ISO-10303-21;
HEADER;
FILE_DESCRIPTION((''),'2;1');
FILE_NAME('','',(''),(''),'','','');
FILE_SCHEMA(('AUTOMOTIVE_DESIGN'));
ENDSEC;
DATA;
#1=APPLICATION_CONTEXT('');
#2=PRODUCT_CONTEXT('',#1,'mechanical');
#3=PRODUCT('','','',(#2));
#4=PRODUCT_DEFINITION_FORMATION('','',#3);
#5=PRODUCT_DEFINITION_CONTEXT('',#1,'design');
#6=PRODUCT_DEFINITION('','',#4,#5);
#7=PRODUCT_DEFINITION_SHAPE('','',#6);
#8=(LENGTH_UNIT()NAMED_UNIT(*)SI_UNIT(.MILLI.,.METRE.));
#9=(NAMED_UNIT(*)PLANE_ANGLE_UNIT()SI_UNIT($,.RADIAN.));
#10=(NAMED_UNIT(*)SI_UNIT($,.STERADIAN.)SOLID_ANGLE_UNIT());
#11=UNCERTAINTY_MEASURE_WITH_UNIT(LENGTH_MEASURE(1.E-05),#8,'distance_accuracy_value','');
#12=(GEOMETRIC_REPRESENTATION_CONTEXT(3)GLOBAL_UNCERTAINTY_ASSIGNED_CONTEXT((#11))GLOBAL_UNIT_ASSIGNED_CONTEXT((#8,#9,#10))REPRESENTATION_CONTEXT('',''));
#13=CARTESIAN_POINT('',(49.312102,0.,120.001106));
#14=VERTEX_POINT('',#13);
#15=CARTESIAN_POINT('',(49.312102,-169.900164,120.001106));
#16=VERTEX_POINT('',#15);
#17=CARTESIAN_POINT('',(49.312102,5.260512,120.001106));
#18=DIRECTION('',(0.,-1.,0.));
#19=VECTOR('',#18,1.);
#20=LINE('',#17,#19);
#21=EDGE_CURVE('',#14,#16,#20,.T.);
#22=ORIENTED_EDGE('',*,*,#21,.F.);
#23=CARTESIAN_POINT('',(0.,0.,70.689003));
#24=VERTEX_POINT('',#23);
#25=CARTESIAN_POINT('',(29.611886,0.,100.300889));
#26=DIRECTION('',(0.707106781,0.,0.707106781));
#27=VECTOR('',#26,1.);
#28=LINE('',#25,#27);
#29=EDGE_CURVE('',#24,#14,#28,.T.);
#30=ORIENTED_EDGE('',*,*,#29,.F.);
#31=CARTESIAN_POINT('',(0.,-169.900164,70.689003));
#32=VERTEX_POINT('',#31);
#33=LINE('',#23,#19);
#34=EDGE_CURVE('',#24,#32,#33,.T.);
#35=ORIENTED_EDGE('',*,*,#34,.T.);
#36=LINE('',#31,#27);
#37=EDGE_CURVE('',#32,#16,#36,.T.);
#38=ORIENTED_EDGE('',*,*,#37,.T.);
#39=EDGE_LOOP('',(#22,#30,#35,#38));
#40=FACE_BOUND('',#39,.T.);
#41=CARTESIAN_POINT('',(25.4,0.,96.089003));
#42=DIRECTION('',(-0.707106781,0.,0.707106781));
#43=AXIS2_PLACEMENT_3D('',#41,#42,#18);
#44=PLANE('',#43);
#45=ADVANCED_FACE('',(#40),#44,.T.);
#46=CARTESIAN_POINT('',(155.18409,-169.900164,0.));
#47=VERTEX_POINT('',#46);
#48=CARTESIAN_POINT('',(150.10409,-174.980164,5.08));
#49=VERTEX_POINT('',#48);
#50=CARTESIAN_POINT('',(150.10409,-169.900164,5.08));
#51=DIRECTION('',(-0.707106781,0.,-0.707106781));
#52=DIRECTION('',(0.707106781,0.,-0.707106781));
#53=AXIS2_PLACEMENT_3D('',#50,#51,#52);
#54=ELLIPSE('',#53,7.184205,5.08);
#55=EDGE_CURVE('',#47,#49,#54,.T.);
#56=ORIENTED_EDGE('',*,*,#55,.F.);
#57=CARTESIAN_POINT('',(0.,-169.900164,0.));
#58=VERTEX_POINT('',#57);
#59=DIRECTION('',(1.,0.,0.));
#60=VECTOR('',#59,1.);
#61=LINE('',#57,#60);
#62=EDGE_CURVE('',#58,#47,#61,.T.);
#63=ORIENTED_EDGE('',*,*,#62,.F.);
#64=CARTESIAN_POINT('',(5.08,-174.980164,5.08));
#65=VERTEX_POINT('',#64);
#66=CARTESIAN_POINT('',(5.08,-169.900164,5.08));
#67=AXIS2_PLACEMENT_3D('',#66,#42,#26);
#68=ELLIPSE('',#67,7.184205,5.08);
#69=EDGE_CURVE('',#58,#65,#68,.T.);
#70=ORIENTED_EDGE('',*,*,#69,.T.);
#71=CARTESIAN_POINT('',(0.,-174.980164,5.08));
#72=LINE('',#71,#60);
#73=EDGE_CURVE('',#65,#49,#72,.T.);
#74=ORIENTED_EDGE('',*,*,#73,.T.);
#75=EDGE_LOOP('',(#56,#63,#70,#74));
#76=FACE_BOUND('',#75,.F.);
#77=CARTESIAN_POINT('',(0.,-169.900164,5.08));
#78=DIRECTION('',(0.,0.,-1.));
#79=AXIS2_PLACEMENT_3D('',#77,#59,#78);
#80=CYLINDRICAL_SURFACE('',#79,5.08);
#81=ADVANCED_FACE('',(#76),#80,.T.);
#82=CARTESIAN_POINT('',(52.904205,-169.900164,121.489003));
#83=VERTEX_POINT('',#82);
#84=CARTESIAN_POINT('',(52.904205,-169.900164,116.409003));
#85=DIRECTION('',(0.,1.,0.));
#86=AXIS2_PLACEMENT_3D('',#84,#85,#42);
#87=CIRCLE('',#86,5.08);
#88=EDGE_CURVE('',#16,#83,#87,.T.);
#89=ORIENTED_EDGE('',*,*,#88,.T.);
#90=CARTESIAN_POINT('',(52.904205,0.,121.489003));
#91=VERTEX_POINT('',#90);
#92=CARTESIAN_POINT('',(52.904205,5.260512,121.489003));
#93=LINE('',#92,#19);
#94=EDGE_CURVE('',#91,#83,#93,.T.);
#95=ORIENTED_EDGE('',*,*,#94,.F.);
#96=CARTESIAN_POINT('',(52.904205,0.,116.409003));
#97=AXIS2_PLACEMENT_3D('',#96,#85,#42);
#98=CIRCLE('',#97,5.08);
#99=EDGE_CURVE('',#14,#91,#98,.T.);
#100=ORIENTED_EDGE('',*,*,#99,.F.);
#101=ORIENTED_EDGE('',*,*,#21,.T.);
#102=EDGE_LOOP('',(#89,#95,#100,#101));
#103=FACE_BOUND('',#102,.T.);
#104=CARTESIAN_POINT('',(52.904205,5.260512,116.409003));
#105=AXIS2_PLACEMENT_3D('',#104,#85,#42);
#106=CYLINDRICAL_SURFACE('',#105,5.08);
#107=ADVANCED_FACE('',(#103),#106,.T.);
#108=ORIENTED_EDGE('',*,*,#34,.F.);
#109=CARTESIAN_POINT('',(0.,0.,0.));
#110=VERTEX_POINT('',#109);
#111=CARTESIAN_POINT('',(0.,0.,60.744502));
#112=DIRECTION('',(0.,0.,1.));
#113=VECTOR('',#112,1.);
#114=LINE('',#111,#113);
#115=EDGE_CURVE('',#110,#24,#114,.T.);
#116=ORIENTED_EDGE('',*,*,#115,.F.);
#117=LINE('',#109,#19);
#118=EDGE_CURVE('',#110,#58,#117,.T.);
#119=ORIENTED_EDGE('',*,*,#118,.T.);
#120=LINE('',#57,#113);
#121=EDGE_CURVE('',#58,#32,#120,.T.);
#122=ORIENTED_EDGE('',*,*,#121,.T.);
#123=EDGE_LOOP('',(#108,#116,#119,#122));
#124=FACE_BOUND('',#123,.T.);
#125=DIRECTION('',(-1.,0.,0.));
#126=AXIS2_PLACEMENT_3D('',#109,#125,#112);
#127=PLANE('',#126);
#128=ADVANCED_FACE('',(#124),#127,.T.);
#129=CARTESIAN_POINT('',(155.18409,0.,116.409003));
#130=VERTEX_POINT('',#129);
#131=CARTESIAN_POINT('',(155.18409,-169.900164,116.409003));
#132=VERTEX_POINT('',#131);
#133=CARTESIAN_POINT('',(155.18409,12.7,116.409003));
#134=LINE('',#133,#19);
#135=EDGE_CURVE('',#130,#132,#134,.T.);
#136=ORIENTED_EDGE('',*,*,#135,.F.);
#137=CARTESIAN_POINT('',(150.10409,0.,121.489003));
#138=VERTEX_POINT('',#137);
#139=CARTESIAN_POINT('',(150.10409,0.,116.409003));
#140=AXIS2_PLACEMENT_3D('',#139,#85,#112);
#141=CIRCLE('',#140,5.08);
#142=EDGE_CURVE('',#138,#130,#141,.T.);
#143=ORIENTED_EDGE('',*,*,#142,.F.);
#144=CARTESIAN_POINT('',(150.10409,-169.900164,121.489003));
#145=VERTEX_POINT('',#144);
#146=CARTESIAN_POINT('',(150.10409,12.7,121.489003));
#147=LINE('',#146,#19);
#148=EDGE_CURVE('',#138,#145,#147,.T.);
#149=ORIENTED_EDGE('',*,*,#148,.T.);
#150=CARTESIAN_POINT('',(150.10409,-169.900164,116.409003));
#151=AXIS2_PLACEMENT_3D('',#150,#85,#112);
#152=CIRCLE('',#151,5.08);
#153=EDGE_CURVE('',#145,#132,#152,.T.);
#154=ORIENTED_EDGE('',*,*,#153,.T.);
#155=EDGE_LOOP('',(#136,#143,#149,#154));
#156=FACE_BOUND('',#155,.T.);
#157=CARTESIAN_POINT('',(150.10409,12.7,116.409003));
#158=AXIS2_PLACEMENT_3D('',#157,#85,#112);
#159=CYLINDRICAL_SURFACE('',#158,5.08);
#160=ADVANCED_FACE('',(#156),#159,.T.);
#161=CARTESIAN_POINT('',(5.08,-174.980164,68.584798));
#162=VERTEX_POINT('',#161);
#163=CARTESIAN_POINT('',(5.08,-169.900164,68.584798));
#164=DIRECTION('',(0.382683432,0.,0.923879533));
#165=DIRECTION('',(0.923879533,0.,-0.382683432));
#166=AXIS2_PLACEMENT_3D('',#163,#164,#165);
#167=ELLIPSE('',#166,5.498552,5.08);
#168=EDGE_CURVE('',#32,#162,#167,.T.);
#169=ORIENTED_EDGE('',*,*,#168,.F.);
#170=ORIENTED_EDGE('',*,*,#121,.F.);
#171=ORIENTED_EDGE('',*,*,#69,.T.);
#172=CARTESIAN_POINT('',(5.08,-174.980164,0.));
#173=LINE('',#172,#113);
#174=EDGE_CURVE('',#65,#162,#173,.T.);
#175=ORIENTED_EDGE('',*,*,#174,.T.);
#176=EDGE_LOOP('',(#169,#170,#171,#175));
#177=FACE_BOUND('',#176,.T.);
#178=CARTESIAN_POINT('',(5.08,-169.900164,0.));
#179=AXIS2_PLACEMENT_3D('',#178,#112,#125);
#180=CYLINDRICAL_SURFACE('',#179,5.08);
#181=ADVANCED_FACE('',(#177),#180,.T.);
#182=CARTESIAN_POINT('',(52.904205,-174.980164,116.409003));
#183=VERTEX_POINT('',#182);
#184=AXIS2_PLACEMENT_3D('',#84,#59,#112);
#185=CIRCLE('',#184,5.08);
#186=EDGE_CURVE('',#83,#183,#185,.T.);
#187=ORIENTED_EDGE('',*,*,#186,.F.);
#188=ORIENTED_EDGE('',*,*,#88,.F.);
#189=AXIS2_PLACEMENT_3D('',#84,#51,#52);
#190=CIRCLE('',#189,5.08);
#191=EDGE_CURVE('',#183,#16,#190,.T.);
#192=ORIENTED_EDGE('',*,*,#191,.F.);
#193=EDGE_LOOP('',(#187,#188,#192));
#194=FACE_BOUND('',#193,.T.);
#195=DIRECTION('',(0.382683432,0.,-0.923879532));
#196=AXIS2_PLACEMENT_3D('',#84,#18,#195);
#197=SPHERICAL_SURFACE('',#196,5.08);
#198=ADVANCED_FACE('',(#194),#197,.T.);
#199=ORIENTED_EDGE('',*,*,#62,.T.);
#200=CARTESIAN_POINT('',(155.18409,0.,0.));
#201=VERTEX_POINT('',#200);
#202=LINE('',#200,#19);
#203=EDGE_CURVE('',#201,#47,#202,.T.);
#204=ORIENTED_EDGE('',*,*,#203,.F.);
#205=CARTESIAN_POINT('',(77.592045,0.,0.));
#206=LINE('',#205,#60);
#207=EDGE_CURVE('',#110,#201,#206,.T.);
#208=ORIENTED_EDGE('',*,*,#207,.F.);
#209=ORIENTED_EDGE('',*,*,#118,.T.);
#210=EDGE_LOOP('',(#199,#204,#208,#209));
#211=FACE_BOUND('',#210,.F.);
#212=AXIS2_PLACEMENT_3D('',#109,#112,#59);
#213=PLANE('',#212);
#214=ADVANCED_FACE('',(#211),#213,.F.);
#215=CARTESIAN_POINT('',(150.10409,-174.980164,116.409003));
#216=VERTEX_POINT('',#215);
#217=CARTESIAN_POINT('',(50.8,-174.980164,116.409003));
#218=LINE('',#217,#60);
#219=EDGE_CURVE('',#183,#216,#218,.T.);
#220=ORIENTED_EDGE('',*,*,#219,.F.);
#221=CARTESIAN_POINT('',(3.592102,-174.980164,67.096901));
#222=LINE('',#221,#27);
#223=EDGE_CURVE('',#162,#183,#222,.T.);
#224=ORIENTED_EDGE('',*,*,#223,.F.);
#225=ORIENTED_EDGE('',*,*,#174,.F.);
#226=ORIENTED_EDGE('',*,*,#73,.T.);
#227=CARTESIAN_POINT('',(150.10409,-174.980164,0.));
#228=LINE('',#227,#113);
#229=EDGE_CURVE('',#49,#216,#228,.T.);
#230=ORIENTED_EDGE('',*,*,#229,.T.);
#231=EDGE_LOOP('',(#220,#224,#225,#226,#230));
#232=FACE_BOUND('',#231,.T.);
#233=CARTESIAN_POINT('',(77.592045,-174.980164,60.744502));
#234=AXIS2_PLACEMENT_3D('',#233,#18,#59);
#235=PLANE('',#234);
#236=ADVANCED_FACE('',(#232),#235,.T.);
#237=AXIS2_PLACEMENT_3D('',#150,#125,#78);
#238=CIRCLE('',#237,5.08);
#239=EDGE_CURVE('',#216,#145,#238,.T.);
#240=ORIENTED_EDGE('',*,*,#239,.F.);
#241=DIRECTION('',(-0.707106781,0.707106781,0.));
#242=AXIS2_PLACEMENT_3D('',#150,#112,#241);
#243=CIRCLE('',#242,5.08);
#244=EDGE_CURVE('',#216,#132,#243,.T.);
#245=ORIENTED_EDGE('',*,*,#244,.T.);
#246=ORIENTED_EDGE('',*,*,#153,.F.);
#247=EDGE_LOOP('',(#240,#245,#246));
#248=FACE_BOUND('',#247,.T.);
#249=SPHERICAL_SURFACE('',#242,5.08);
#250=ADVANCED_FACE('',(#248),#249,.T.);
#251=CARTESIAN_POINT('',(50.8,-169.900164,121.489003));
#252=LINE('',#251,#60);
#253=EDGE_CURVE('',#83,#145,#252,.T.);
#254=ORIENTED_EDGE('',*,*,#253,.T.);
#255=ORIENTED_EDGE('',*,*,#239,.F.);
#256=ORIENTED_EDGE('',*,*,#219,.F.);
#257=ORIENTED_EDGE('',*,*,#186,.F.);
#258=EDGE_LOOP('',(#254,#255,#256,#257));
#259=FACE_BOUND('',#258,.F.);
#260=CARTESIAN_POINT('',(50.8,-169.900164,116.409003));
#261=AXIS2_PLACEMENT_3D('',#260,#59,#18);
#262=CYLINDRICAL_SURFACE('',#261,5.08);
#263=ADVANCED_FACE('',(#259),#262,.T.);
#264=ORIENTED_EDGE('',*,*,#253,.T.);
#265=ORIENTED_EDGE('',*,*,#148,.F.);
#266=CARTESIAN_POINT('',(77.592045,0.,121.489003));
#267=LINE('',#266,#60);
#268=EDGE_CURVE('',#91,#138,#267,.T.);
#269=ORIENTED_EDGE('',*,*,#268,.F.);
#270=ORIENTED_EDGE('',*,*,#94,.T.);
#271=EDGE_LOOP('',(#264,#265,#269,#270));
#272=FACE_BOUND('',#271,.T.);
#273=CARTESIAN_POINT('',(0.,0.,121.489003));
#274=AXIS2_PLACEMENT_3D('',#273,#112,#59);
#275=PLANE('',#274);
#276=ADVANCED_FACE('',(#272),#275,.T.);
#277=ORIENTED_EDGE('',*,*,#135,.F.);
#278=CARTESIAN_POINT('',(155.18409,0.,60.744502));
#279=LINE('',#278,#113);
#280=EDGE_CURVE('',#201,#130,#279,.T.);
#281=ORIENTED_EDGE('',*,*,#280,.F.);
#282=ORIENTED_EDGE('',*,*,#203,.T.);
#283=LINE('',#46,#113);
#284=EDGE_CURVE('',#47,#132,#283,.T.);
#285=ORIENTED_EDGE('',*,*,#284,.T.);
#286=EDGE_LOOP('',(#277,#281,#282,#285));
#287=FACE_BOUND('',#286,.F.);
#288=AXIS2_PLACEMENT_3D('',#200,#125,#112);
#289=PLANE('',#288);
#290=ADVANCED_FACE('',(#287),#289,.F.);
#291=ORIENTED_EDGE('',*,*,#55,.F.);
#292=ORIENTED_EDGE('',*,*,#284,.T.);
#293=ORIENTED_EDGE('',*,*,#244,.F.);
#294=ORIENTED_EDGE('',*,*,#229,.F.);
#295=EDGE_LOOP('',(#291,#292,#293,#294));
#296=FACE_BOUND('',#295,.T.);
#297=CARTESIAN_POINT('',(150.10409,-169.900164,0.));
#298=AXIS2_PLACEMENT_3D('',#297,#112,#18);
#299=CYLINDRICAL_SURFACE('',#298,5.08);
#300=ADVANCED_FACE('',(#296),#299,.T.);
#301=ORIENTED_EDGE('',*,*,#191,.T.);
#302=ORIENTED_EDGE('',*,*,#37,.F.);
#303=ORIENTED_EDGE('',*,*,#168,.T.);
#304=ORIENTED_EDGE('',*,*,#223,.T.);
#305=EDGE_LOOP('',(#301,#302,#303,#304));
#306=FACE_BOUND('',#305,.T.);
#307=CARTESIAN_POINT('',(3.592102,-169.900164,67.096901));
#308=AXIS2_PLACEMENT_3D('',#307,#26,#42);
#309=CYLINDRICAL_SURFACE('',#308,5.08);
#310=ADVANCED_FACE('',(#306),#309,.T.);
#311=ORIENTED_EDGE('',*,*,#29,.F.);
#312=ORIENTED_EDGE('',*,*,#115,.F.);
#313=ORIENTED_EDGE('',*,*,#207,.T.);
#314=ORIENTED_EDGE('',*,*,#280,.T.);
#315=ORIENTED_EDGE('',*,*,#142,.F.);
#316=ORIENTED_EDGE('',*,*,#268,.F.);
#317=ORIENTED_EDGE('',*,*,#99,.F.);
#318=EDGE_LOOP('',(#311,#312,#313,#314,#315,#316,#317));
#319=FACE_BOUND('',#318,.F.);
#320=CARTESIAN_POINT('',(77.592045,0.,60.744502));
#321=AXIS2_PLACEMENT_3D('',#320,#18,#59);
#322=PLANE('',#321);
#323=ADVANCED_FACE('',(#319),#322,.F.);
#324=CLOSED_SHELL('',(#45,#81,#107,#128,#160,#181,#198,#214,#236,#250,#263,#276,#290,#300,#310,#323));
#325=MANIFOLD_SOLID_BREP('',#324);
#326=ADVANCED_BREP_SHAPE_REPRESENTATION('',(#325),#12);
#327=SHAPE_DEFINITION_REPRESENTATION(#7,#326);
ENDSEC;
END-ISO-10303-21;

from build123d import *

# Parameters (mm, degrees)
F0_W         = 155.1840901375
F0_H         = 121.4890033007
F1_DEPTH     = 174.9801635742
F2_SIZE      = 50.8
F3_R         = 5.08
F4_T1_DEPTH  = 182.6001635742
F4_T3_DEPTH  = 175.1606758164
F4_T8_DEPTH  = 5.08
F4_S13_W     = 5.08
F4_S13_H     = 5.08
F4_T14_DEPTH = 5.08


# Not quite as in the source:
# - a fillet or chamfer that OpenCascade refuses, or shapes differently, is made with other operations: its cross-section is extruded or revolved along the edge and cut away or added


with BuildPart() as f1:
    # F0 (on Front) → F1 (new body)
    with BuildSketch(Plane.XZ):
        with Locations((77.5920450687, 60.7445016503)):
            Rectangle(F0_W, F0_H)
    extrude(amount=F1_DEPTH)

    # F2
    f2_edges = [f1.edges().sort_by_distance(p)[0] for p in [
        (0, -87.490082, 121.489003),
    ]]
    chamfer(f2_edges, length=F2_SIZE)

    # F3
    f3_edges = [f1.edges().sort_by_distance(p)[0] for p in [
        (25.4, -174.980164, 96.089003),
        (0, -174.980164, 35.344502),
        (77.592045, -174.980164, 0),
        (102.992045, -174.980164, 121.489003),
        (155.18409, -174.980164, 60.744502),
    ]]
    fillet(f3_edges, radius=F3_R)

    # F4: fillet of radius 5.08 on 4 edges, made by hand

    # F4_s2 → F4_t1 (cut)
    with BuildSketch(Plane.XZ.offset(-12.7)):
        with BuildLine():
            ThreePointArc((150.1040901375, 121.4890033007), (153.6961925859, 120.0011057491), (155.1840901375, 116.4090033007))
            Line((155.1840901375, 116.4090033007), (155.1840901375, 121.4890033007))
            Line((155.1840901375, 121.4890033007), (150.1040901375, 121.4890033007))
        make_face()
    extrude(amount=F4_T1_DEPTH, mode=Mode.SUBTRACT)

    # F4_s4 → F4_t3 (cut)
    with BuildSketch(Plane.XZ.offset(-5.2605122421)):
        with BuildLine():
            ThreePointArc((49.3121024484, 120.0011057491), (50.9601730604, 121.1023113258), (52.9042048969, 121.4890033007))
            Line((52.9042048969, 121.4890033007), (50.8, 121.4890033007))
            Line((50.8, 121.4890033007), (49.3121024484, 120.0011057491))
        make_face()
    extrude(amount=F4_T3_DEPTH, mode=Mode.SUBTRACT)


with BuildPart() as f4_tool6:
    # F4_s7 → F4_t8 (new body)
    with BuildSketch(Plane.XZ.offset(169.9001635742)):
        Polygon((52.9042048969, 116.4090033007), (49.3121024484, 120.0011057491), (50.8, 121.4890033007), (52.9042048969, 121.4890033007), align=None)
    extrude(amount=F4_T8_DEPTH)

    # F4_s9 → F4_t10 (revolve, cut)
    with BuildSketch(Plane(origin=(52.9042048969, -169.9001635742, 116.4090033007), x_dir=(0.3826834324, 0, -0.9238795325), z_dir=(-0.9238795325, 0, -0.3826834324))):
        with BuildLine():
            ThreePointArc((0, -5.08), (5.08, 0), (0, 5.08))
            Line((0, 5.08), (0, -5.08))
        make_face()
    revolve(axis=Axis((52.9042048969, -169.9001635742, 116.4090033007), (0, -1, 0)), mode=Mode.SUBTRACT)


with BuildPart() as f1_1:
    add(f1.part)

    # F4_t5: cut F4_tool6
    add(f4_tool6.part, mode=Mode.SUBTRACT)


with BuildPart() as f4_tool12:
    # F4_s13 → F4_t14 (new body)
    with BuildSketch(Plane.XY.offset(116.4090033007)):
        with Locations((152.6440901375, -172.4401635742)):
            Rectangle(F4_S13_W, F4_S13_H)
    extrude(amount=F4_T14_DEPTH)

    # F4_s15 → F4_t16 (revolve, cut)
    with BuildSketch(Plane(origin=(150.1040901375, -169.9001635742, 116.4090033007), x_dir=(-0.7071067812, 0.7071067812, 0), z_dir=(0.7071067812, 0.7071067812, 0))):
        with BuildLine():
            ThreePointArc((0, -5.08), (5.08, 0), (0, 5.08))
            Line((0, 5.08), (0, -5.08))
        make_face()
    revolve(axis=Axis((150.1040901375, -169.9001635742, 116.4090033007), (0, 0, 1)), mode=Mode.SUBTRACT)


with BuildPart() as f1_2:
    add(f1_1.part)

    # F4_t11: cut F4_tool12
    add(f4_tool12.part, mode=Mode.SUBTRACT)


solid = f1_2.part
